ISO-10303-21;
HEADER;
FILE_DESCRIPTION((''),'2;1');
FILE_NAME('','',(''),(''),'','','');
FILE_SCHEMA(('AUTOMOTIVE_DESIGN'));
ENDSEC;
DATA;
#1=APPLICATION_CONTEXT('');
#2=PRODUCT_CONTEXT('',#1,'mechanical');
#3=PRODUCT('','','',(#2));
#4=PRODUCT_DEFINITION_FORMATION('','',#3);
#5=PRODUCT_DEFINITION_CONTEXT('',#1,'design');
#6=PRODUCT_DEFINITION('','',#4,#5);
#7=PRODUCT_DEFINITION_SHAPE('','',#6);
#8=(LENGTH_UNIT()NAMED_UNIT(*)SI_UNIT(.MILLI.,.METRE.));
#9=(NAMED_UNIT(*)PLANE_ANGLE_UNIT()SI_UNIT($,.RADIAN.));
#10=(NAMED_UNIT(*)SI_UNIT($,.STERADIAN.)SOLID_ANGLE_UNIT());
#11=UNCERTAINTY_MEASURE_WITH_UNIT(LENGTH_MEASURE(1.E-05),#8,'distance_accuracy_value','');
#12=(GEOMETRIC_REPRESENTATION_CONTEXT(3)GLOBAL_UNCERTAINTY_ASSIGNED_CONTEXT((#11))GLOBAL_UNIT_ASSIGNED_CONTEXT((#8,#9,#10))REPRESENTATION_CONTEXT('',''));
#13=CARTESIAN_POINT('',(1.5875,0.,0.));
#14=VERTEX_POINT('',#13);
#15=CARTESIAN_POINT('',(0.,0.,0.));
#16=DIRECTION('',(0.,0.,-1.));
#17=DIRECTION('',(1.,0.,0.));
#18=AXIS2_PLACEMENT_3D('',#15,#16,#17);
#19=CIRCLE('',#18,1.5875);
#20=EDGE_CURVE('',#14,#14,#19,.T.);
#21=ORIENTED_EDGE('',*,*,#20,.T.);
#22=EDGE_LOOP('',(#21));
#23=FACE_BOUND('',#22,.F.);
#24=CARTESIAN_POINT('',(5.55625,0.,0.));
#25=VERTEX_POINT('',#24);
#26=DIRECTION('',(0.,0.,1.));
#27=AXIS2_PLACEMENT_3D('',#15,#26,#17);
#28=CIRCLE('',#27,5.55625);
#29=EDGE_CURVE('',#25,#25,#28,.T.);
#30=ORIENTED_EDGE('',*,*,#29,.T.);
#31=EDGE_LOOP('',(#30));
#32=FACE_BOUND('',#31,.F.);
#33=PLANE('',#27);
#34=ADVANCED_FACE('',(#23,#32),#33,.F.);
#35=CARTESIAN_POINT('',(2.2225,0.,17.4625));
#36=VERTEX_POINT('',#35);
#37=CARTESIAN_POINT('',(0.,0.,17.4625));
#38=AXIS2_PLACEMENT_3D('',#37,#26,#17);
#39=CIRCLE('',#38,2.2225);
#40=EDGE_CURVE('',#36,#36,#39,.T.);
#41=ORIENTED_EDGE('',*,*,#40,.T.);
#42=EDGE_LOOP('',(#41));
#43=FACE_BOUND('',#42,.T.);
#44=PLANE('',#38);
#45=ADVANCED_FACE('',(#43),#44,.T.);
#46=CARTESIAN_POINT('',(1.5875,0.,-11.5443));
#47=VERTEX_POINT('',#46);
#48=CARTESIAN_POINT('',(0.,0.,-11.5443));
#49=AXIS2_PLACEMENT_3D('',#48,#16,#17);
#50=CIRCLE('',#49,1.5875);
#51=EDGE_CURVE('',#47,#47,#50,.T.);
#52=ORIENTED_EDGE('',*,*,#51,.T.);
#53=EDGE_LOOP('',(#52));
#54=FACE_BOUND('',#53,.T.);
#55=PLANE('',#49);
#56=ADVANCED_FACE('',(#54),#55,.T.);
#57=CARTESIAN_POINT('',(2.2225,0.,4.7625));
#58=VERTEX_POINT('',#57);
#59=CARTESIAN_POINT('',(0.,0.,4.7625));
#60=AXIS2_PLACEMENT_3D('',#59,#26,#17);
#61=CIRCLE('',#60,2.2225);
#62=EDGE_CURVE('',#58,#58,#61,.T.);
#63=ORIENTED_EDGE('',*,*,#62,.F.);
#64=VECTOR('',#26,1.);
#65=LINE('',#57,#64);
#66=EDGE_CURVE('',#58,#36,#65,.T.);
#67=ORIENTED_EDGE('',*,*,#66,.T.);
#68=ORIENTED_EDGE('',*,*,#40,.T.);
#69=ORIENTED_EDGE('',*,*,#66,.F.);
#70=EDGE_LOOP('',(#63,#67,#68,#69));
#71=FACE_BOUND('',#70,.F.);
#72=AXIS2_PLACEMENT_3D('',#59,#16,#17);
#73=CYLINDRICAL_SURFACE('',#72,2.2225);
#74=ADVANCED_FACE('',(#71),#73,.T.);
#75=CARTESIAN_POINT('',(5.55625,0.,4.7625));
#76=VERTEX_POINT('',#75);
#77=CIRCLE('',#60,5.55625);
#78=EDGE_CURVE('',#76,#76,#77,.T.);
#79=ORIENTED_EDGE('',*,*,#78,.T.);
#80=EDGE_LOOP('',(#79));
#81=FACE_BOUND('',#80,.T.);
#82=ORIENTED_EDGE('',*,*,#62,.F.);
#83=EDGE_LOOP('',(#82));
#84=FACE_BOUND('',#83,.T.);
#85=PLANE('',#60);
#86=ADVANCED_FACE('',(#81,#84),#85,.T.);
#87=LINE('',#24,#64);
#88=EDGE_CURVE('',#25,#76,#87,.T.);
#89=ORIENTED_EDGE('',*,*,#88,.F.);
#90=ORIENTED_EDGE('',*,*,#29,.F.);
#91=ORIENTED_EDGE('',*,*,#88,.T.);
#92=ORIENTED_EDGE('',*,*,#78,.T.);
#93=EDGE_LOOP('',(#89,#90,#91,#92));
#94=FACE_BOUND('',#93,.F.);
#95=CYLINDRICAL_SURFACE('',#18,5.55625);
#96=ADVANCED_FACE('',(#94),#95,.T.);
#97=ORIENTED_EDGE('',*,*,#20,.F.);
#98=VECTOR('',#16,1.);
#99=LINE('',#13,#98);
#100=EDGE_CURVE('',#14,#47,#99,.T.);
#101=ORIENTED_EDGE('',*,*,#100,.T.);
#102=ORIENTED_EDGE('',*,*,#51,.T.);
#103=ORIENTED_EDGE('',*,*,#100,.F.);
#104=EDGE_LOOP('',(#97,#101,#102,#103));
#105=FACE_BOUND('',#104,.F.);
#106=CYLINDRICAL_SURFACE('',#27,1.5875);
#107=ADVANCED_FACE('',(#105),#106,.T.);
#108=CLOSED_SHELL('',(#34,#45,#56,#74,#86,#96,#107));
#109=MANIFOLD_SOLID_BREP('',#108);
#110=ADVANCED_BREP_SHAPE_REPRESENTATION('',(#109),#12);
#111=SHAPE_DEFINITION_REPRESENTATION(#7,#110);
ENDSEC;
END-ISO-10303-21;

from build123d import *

# Parameters (mm, degrees)
F0_R     = 5.55625
F1_DEPTH = 4.7625
F2_R     = 2.2225
F3_DEPTH = 12.7
F4_R     = 1.5875
F5_DEPTH = 11.5443


# Not quite as in the source:
# - a length typed as a fraction of an inch, garbled in the dataset ("3 / 203.2 mm" for 3/8 in), is restored


with BuildPart() as f1:
    # F0 (on Top) → F1 (new body)
    with BuildSketch(Plane.XY):
        Circle(F0_R)
    extrude(amount=F1_DEPTH)

    # F2 (on face) → F3 (join)
    with BuildSketch(Plane.XY.offset(4.7625)):
        Circle(F2_R)
    extrude(amount=F3_DEPTH)

    # F4 (on face) → F5 (join)
    with BuildSketch(Plane(origin=(0, 0, 0), x_dir=(1, 0, 0), z_dir=(0, 0, -1))):
        Circle(F4_R)
    extrude(amount=F5_DEPTH)


solid = f1.part
